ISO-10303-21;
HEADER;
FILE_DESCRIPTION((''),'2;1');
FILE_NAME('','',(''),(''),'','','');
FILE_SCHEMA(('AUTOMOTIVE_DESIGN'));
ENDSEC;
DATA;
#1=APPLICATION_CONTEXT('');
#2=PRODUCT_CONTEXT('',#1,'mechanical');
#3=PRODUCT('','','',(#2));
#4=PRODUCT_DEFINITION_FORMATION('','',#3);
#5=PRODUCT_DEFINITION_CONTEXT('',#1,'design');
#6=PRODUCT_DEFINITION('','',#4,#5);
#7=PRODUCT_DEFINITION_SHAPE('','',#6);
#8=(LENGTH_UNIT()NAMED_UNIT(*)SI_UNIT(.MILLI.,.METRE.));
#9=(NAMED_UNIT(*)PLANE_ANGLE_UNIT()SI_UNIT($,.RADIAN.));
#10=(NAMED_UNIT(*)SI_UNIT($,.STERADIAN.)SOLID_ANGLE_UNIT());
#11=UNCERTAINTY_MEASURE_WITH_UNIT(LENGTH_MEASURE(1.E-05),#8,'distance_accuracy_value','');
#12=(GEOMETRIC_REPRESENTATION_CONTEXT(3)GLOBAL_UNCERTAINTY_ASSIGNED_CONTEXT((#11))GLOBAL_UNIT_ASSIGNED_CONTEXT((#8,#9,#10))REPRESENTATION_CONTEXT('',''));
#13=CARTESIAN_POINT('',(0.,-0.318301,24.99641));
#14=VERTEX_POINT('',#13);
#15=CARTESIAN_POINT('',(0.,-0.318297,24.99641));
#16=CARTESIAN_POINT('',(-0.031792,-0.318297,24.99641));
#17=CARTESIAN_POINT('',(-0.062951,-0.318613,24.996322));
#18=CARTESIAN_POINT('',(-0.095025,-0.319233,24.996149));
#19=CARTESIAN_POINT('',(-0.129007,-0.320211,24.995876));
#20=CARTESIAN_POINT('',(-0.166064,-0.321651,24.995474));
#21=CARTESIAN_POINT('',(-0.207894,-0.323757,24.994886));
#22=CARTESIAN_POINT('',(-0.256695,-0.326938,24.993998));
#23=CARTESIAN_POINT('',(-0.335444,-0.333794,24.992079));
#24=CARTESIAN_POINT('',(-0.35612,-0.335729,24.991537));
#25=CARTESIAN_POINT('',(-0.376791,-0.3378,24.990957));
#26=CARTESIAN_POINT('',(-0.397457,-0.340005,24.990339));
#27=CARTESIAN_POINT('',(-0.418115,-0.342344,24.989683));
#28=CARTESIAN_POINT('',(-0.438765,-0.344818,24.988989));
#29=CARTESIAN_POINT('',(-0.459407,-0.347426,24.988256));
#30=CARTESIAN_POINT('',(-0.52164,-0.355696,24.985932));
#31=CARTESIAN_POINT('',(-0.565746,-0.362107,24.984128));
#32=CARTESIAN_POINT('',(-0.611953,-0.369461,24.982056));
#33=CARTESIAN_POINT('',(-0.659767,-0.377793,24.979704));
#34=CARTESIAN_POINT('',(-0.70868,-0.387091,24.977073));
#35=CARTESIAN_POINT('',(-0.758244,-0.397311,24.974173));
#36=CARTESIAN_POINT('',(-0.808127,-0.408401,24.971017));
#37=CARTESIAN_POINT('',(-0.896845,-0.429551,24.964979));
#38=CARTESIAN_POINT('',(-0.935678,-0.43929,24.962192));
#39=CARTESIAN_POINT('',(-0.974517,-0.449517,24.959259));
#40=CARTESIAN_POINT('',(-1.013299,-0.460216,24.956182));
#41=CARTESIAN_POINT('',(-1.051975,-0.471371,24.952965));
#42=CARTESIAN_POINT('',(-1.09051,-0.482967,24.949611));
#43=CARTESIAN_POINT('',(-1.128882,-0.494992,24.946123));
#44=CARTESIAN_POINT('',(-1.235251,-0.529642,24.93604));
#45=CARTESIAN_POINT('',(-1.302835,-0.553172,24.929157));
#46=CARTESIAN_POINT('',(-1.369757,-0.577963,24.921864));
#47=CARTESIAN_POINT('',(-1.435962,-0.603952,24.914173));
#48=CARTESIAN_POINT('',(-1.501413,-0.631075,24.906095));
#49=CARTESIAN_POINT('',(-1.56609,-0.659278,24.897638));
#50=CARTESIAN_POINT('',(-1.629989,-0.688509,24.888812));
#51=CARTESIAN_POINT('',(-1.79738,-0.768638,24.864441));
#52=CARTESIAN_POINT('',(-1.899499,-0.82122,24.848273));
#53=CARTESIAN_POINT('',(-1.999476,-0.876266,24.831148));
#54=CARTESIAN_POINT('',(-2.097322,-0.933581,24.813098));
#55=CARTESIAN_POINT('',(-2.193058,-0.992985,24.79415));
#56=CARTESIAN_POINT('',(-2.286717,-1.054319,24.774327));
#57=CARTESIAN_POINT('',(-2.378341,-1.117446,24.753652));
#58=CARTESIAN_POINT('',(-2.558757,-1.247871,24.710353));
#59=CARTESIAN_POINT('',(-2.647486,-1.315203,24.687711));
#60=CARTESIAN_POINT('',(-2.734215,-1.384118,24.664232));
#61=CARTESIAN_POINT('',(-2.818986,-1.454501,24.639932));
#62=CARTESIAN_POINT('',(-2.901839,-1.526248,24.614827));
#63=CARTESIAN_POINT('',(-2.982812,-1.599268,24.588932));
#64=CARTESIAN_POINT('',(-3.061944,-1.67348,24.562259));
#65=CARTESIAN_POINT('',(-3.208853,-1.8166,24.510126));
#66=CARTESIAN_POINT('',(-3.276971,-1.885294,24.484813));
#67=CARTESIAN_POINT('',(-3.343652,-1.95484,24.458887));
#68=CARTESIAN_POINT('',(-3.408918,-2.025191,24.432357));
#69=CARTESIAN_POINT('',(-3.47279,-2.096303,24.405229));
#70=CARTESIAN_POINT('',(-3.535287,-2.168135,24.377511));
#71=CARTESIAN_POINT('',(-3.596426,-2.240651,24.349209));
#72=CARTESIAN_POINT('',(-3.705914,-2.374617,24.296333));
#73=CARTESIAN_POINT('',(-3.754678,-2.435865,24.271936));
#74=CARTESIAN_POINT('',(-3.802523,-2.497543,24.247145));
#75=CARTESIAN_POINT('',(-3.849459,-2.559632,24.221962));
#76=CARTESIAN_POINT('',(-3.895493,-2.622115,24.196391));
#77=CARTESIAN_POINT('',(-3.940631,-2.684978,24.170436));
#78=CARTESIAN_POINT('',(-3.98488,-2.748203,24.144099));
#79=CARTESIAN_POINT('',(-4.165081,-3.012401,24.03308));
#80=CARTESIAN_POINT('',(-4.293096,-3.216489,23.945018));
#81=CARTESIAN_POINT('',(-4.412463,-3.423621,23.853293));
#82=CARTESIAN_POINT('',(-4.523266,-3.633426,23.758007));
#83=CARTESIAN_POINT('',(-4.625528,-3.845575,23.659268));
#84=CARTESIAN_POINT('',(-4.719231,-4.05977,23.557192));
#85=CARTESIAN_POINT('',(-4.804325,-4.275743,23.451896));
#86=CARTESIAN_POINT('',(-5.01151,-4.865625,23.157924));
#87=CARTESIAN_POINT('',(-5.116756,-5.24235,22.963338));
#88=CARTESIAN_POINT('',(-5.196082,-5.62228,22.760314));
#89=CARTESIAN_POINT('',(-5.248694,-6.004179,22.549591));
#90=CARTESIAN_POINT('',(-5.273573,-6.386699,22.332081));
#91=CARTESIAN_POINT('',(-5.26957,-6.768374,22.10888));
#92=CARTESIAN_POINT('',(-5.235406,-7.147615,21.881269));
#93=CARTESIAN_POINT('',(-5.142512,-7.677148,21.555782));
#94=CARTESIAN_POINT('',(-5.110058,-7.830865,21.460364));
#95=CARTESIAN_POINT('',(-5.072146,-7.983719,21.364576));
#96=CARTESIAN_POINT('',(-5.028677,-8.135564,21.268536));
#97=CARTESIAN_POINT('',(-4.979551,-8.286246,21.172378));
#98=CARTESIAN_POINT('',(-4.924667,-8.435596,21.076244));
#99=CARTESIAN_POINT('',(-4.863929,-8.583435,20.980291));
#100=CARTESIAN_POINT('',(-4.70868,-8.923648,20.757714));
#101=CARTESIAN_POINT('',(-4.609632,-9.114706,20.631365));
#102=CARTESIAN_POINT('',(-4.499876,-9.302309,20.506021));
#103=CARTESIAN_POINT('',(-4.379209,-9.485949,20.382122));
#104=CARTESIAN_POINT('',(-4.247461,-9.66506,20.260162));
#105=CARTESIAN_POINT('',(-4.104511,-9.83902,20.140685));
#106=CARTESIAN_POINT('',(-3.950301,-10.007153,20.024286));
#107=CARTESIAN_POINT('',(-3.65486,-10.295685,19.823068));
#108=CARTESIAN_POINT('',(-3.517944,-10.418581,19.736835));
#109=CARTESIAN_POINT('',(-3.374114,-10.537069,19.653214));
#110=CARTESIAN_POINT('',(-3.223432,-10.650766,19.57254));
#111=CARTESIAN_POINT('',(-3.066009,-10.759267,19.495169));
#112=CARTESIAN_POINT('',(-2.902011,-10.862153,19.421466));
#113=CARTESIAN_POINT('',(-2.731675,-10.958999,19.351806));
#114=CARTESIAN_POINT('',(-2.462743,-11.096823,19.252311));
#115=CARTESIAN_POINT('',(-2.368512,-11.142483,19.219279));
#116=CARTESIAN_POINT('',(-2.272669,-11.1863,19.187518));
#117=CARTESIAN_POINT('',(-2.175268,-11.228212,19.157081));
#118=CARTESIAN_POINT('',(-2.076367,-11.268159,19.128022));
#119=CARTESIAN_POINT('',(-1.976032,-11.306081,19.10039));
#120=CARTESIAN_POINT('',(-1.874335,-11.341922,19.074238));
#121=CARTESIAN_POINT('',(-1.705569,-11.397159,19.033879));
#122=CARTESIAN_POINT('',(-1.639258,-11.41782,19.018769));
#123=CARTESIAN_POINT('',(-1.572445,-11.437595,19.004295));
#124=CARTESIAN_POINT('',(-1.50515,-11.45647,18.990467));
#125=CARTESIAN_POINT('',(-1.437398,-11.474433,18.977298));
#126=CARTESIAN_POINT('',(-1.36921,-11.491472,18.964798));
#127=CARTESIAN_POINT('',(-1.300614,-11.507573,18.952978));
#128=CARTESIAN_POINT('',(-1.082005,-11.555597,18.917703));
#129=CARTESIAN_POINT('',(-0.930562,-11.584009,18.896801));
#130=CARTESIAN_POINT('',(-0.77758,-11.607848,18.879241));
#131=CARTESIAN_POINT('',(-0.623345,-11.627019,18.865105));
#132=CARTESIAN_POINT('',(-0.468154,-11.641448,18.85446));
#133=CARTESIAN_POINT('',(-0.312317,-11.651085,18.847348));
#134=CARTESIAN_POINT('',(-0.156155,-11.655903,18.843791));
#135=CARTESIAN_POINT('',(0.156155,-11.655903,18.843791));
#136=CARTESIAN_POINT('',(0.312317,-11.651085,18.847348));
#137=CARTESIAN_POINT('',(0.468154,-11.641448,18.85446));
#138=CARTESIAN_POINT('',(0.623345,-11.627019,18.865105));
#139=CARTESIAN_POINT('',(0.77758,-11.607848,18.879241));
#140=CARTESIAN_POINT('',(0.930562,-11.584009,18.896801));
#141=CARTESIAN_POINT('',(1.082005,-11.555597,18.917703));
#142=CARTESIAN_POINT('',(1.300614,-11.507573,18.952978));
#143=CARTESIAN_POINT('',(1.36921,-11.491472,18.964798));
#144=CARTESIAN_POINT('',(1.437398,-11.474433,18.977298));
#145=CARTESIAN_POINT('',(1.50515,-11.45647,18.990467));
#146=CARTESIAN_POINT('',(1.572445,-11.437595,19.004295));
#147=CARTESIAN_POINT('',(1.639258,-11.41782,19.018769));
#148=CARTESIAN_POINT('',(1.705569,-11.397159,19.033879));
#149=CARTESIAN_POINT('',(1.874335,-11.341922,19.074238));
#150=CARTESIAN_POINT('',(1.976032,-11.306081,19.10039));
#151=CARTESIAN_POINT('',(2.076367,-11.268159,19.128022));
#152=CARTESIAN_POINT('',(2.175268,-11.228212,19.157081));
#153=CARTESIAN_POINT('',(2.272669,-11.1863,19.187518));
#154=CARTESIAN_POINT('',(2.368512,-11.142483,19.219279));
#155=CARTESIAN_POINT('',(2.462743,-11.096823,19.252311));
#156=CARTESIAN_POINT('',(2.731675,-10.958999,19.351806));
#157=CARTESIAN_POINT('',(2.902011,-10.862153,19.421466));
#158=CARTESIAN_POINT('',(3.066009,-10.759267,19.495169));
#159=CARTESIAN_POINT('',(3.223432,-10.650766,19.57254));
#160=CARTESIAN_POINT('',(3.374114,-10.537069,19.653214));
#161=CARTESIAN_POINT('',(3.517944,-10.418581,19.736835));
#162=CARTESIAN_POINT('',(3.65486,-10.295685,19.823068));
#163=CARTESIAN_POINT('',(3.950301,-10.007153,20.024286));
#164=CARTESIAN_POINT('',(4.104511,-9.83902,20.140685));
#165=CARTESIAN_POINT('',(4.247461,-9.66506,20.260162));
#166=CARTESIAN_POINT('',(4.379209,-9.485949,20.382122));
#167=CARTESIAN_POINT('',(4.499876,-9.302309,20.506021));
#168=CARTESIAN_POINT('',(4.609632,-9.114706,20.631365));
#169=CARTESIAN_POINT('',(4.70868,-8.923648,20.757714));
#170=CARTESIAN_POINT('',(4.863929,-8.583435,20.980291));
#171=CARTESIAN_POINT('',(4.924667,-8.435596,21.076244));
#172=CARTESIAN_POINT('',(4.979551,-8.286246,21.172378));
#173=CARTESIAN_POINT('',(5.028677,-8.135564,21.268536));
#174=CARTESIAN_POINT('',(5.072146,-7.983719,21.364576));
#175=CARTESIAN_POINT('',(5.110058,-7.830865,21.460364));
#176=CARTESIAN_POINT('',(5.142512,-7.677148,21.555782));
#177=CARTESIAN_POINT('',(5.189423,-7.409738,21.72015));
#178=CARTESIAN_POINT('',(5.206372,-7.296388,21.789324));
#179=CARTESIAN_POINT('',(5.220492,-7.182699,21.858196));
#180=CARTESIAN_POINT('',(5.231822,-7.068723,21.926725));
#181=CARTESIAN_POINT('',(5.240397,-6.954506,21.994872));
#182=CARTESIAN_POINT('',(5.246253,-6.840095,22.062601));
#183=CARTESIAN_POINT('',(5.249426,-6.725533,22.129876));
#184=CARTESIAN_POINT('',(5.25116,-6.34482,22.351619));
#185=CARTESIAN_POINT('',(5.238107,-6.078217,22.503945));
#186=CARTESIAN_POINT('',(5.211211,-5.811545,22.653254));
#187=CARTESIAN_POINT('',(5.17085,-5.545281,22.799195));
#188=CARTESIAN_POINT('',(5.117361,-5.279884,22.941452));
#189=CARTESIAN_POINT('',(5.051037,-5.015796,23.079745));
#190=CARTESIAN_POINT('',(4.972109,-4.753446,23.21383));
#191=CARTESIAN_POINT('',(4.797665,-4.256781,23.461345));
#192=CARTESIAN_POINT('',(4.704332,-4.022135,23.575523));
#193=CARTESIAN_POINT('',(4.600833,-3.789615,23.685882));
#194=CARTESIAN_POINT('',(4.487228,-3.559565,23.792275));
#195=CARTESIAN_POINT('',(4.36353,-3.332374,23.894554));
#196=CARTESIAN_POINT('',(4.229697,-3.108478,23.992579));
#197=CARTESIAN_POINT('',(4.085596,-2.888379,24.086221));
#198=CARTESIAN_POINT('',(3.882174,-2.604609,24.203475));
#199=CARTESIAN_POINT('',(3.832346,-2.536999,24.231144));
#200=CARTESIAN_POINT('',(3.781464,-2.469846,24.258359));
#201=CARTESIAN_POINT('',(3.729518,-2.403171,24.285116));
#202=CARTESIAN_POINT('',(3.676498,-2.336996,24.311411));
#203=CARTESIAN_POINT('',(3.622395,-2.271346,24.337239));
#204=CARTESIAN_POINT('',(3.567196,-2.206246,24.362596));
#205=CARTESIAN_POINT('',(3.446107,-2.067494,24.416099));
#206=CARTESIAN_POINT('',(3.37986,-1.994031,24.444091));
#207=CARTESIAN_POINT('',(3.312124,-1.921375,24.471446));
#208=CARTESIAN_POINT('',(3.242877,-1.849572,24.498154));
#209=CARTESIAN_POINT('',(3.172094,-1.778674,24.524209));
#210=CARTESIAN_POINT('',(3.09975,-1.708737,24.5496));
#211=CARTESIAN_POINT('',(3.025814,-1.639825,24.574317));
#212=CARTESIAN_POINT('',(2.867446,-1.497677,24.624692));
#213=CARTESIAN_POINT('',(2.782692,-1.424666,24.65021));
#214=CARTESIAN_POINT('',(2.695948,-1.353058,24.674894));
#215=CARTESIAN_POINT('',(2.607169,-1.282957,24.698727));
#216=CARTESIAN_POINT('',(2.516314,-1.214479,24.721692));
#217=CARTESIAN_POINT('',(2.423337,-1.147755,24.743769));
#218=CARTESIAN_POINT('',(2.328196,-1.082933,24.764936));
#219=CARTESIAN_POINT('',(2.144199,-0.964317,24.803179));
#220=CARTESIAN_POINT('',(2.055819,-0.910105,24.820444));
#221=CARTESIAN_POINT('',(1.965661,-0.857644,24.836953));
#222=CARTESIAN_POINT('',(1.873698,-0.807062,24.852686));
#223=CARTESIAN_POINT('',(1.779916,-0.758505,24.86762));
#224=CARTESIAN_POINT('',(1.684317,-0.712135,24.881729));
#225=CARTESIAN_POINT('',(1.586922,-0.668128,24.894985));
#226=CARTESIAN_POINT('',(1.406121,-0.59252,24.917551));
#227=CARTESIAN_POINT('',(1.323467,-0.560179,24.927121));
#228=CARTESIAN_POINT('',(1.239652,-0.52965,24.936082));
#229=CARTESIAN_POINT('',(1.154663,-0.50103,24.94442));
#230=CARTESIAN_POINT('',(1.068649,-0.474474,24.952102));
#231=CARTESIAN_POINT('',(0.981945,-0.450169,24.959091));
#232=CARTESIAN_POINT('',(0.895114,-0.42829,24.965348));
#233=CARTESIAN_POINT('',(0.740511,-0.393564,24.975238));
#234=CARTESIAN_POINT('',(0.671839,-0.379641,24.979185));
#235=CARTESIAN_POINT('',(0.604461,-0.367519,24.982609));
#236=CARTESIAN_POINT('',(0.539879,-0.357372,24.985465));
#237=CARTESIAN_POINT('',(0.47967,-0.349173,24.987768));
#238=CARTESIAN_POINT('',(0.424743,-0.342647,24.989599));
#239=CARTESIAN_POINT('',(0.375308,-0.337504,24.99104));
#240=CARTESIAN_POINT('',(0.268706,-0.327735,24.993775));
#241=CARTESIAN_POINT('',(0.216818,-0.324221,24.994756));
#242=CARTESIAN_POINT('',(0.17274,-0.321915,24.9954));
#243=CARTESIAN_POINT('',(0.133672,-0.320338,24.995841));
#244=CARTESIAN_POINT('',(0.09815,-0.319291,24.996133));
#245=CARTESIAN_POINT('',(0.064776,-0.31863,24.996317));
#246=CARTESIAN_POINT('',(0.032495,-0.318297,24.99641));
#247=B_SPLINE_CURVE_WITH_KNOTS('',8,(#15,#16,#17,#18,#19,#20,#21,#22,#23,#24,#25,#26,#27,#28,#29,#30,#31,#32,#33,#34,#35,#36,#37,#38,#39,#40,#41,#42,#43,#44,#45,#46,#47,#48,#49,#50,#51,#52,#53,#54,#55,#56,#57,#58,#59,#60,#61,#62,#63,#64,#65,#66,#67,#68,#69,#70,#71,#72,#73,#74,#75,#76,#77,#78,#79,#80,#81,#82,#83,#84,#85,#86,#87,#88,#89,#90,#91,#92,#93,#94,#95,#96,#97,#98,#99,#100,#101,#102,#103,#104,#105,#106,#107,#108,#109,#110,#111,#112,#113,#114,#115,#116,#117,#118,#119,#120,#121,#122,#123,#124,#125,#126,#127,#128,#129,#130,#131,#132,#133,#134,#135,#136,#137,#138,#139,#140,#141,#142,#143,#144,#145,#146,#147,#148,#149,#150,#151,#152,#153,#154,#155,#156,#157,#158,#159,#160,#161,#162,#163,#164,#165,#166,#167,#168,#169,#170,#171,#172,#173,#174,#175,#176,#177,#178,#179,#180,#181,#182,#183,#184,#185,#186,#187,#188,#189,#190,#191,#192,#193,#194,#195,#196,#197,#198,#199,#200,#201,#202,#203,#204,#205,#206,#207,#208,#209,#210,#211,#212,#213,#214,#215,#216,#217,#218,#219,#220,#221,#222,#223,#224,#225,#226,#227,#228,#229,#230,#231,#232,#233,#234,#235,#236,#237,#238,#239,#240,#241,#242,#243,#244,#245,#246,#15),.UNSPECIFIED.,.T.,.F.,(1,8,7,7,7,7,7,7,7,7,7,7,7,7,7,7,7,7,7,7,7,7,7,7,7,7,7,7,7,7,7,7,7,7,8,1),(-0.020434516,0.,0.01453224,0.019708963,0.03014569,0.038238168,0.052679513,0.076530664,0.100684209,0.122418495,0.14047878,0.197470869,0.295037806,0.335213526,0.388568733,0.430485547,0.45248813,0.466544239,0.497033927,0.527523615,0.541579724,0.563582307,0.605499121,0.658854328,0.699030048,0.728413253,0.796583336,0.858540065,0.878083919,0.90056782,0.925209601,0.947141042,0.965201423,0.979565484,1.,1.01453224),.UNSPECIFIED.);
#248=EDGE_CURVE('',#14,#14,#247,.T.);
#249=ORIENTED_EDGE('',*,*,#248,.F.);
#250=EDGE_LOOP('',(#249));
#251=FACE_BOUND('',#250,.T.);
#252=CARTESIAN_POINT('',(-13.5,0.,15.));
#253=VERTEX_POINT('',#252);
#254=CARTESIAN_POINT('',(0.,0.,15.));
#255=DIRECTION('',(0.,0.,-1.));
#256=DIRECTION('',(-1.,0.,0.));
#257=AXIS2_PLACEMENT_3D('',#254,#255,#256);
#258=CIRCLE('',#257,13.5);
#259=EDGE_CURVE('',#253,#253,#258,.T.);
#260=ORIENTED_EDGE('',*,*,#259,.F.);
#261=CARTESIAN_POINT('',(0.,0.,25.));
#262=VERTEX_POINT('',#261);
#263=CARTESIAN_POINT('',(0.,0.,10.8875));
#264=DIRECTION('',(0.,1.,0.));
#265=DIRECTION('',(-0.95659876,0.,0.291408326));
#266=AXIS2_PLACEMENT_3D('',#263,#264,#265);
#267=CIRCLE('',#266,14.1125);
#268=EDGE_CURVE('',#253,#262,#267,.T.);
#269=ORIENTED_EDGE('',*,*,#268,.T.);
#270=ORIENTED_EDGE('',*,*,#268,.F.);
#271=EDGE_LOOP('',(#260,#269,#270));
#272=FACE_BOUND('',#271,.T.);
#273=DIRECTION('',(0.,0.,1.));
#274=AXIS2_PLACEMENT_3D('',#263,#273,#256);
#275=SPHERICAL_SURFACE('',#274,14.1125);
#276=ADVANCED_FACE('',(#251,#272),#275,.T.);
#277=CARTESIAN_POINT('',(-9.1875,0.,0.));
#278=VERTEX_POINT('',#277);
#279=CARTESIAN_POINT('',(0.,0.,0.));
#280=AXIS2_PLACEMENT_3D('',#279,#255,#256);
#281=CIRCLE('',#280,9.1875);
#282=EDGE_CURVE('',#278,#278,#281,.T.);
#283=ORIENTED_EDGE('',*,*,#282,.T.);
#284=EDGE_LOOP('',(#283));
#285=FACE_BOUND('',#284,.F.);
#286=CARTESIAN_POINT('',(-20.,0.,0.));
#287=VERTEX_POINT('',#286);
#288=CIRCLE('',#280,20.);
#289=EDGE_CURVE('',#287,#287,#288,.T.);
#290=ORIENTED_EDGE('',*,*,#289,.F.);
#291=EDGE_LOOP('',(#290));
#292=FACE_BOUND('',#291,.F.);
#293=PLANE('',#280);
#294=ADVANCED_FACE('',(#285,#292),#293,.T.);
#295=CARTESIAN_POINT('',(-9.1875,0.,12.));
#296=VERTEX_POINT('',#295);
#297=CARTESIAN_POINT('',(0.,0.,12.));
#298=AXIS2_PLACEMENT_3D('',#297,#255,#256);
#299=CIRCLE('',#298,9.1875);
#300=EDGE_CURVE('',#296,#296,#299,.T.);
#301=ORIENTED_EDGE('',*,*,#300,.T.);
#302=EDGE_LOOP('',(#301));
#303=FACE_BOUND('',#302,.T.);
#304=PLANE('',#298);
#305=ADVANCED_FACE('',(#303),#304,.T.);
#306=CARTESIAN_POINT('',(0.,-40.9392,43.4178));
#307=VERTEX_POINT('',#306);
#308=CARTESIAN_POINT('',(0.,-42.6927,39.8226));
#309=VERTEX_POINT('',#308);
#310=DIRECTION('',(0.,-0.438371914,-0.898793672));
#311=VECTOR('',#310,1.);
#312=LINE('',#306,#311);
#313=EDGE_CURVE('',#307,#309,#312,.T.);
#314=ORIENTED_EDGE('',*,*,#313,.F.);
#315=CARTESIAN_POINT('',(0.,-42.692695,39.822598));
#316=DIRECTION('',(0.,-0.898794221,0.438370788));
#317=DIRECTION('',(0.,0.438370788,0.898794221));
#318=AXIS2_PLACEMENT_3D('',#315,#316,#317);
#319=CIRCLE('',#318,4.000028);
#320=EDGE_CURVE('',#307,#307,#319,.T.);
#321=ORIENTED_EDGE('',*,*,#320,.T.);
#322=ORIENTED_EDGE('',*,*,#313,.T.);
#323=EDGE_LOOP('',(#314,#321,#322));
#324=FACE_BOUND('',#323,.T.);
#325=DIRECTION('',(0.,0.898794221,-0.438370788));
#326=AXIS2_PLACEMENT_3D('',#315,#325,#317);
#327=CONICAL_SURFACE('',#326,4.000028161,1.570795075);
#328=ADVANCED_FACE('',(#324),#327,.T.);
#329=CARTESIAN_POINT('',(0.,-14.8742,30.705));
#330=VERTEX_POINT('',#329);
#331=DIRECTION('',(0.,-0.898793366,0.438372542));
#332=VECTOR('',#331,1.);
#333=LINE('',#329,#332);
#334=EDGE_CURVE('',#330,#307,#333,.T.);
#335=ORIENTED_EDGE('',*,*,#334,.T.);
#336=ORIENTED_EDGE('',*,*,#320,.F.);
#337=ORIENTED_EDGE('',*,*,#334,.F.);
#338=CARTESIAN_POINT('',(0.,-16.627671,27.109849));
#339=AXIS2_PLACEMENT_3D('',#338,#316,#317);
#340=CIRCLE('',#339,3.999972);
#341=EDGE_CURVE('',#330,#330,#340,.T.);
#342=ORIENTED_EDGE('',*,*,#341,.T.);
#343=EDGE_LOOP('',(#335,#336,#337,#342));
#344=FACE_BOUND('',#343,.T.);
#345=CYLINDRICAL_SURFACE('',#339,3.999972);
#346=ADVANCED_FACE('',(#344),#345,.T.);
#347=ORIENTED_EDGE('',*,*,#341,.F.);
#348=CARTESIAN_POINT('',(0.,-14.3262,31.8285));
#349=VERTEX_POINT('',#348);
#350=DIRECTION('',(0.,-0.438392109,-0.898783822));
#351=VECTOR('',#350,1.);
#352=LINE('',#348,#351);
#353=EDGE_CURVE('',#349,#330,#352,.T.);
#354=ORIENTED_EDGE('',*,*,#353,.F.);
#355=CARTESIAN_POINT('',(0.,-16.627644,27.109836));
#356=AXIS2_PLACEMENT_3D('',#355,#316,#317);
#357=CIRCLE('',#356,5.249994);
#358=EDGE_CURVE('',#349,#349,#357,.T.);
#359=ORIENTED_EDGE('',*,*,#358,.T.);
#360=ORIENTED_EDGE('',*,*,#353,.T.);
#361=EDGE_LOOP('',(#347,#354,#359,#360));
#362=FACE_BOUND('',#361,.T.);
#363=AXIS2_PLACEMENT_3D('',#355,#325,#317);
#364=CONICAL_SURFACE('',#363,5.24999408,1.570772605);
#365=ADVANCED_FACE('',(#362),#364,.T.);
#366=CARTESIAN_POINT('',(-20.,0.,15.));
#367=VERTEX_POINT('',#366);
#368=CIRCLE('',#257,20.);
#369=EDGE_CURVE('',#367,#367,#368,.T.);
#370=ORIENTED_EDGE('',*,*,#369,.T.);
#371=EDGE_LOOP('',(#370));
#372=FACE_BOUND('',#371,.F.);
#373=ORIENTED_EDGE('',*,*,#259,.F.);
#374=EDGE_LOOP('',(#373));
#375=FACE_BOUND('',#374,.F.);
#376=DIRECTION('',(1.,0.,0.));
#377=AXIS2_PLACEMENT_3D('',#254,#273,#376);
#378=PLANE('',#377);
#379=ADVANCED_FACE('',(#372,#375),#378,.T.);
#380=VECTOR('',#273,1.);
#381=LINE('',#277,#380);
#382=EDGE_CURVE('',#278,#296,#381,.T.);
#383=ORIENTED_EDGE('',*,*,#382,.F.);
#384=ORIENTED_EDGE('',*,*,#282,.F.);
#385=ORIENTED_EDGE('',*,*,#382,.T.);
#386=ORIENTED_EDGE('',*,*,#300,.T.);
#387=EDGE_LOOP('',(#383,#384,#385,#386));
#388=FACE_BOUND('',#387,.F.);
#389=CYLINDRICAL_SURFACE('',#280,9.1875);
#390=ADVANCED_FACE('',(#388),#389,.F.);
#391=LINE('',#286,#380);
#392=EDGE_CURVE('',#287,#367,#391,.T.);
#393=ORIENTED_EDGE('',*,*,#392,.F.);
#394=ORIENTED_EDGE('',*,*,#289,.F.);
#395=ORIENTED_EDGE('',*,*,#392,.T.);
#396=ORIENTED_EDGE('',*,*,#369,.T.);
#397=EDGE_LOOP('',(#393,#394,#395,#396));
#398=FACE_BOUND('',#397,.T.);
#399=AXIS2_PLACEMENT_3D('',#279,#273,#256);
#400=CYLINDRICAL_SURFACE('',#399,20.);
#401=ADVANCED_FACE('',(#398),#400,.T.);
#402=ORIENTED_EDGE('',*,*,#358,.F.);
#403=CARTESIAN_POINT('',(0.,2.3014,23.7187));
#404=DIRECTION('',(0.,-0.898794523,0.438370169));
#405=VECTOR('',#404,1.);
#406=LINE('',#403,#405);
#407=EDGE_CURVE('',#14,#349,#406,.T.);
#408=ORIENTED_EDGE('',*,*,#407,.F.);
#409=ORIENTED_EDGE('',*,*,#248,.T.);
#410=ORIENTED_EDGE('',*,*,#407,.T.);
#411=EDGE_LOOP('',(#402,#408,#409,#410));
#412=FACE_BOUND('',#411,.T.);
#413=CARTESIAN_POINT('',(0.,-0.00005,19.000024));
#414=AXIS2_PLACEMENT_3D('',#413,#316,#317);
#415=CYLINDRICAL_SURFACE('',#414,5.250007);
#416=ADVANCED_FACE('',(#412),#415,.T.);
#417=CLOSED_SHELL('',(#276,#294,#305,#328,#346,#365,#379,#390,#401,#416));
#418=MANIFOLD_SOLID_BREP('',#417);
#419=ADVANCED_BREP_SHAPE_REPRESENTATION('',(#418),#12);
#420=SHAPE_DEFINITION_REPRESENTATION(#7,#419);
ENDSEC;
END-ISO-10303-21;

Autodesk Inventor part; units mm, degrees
ref_plane "YZ Plane" through (0, 0, 0) normal (1, 0, 0) x (0, 1, 0)
ref_plane "XZ Plane" through (0, 0, 0) normal (0, 1, 0) x (-1, 0, 0)
ref_plane "XY Plane" through (0, 0, 0) normal (0, 0, 1) x (1, 0, 0)
sketch "Sketch1" plane through (0, 0, 0) normal (0, 1, 0) x (-1, 0, 0)
  line L0 (0, 0) -> (20, 0)
  line L1 (20, 0) -> (20, 15)
  line L2 (20, 15) -> (13.5, 15)
  line L3 (0, 25) -> (0, 0)
  line L4 (0, 0) -> (0, 15.843) construction
  line L5 (0, 25) -> (13.5, 25) construction
  line L6 (13.5, 25) -> (13.5, 15) construction
  line L7 (0, 0) -> (0, -31.0844) construction
  arc A0 (13.5, 15) -> (0, 25) centre (0, 10.8875) ccw
  dimension "d0" = 20
  dimension "d1" = 15
  dimension "d3" = 25
  dimension "d4" = 13.5
revolve "Revolution1" add sketch "Sketch1" angle 360 about axis through (0, 0, 0) along (0, 0, -1)
sketch "Sketch2" plane through (0, 0, 0) normal (1, 0, 0) x (0, 1, 0)
  line L0 (0, 19) -> (-45.3208, 41.1044) construction
  line L1 (0, 19) -> (-38.3392, 19) construction
  line L2 (-20, 0) -> (20, 0) construction
  line L3 (0, 19) -> (0, 0) construction
  line L4 (0, 19) -> (2.3014, 23.7187)
  line L5 (2.3014, 23.7187) -> (-14.3262, 31.8285)
  line L6 (-14.3262, 31.8285) -> (-14.8742, 30.705)
  line L7 (-14.8742, 30.705) -> (-40.9392, 43.4178)
  line L8 (-40.9392, 43.4178) -> (-42.6927, 39.8226)
  line L9 (-42.6927, 39.8226) -> (0, 19)
  dimension "d6" = 19
  dimension "d7" = 26
  dimension "d8" = 18.5
  dimension "d9" = 29
  dimension "d10" = 4
  dimension "d11" = 5.25
revolve "Revolution2" add sketch "Sketch2" angle 360 about axis through (0, 0, 19) along (0, -0.898794, 0.4383711)
sketch "Sketch3" plane through (0, 0, 0) normal (0, 0, -1) x (-1, 0, 0)
  circle A0 centre (0, 0) radius 9.1875
  dimension "d13" = 18.375
extrude "Extrusion1" cut sketch "Sketch3" against normal blind 12
properties part number "waterbottle_lid"
